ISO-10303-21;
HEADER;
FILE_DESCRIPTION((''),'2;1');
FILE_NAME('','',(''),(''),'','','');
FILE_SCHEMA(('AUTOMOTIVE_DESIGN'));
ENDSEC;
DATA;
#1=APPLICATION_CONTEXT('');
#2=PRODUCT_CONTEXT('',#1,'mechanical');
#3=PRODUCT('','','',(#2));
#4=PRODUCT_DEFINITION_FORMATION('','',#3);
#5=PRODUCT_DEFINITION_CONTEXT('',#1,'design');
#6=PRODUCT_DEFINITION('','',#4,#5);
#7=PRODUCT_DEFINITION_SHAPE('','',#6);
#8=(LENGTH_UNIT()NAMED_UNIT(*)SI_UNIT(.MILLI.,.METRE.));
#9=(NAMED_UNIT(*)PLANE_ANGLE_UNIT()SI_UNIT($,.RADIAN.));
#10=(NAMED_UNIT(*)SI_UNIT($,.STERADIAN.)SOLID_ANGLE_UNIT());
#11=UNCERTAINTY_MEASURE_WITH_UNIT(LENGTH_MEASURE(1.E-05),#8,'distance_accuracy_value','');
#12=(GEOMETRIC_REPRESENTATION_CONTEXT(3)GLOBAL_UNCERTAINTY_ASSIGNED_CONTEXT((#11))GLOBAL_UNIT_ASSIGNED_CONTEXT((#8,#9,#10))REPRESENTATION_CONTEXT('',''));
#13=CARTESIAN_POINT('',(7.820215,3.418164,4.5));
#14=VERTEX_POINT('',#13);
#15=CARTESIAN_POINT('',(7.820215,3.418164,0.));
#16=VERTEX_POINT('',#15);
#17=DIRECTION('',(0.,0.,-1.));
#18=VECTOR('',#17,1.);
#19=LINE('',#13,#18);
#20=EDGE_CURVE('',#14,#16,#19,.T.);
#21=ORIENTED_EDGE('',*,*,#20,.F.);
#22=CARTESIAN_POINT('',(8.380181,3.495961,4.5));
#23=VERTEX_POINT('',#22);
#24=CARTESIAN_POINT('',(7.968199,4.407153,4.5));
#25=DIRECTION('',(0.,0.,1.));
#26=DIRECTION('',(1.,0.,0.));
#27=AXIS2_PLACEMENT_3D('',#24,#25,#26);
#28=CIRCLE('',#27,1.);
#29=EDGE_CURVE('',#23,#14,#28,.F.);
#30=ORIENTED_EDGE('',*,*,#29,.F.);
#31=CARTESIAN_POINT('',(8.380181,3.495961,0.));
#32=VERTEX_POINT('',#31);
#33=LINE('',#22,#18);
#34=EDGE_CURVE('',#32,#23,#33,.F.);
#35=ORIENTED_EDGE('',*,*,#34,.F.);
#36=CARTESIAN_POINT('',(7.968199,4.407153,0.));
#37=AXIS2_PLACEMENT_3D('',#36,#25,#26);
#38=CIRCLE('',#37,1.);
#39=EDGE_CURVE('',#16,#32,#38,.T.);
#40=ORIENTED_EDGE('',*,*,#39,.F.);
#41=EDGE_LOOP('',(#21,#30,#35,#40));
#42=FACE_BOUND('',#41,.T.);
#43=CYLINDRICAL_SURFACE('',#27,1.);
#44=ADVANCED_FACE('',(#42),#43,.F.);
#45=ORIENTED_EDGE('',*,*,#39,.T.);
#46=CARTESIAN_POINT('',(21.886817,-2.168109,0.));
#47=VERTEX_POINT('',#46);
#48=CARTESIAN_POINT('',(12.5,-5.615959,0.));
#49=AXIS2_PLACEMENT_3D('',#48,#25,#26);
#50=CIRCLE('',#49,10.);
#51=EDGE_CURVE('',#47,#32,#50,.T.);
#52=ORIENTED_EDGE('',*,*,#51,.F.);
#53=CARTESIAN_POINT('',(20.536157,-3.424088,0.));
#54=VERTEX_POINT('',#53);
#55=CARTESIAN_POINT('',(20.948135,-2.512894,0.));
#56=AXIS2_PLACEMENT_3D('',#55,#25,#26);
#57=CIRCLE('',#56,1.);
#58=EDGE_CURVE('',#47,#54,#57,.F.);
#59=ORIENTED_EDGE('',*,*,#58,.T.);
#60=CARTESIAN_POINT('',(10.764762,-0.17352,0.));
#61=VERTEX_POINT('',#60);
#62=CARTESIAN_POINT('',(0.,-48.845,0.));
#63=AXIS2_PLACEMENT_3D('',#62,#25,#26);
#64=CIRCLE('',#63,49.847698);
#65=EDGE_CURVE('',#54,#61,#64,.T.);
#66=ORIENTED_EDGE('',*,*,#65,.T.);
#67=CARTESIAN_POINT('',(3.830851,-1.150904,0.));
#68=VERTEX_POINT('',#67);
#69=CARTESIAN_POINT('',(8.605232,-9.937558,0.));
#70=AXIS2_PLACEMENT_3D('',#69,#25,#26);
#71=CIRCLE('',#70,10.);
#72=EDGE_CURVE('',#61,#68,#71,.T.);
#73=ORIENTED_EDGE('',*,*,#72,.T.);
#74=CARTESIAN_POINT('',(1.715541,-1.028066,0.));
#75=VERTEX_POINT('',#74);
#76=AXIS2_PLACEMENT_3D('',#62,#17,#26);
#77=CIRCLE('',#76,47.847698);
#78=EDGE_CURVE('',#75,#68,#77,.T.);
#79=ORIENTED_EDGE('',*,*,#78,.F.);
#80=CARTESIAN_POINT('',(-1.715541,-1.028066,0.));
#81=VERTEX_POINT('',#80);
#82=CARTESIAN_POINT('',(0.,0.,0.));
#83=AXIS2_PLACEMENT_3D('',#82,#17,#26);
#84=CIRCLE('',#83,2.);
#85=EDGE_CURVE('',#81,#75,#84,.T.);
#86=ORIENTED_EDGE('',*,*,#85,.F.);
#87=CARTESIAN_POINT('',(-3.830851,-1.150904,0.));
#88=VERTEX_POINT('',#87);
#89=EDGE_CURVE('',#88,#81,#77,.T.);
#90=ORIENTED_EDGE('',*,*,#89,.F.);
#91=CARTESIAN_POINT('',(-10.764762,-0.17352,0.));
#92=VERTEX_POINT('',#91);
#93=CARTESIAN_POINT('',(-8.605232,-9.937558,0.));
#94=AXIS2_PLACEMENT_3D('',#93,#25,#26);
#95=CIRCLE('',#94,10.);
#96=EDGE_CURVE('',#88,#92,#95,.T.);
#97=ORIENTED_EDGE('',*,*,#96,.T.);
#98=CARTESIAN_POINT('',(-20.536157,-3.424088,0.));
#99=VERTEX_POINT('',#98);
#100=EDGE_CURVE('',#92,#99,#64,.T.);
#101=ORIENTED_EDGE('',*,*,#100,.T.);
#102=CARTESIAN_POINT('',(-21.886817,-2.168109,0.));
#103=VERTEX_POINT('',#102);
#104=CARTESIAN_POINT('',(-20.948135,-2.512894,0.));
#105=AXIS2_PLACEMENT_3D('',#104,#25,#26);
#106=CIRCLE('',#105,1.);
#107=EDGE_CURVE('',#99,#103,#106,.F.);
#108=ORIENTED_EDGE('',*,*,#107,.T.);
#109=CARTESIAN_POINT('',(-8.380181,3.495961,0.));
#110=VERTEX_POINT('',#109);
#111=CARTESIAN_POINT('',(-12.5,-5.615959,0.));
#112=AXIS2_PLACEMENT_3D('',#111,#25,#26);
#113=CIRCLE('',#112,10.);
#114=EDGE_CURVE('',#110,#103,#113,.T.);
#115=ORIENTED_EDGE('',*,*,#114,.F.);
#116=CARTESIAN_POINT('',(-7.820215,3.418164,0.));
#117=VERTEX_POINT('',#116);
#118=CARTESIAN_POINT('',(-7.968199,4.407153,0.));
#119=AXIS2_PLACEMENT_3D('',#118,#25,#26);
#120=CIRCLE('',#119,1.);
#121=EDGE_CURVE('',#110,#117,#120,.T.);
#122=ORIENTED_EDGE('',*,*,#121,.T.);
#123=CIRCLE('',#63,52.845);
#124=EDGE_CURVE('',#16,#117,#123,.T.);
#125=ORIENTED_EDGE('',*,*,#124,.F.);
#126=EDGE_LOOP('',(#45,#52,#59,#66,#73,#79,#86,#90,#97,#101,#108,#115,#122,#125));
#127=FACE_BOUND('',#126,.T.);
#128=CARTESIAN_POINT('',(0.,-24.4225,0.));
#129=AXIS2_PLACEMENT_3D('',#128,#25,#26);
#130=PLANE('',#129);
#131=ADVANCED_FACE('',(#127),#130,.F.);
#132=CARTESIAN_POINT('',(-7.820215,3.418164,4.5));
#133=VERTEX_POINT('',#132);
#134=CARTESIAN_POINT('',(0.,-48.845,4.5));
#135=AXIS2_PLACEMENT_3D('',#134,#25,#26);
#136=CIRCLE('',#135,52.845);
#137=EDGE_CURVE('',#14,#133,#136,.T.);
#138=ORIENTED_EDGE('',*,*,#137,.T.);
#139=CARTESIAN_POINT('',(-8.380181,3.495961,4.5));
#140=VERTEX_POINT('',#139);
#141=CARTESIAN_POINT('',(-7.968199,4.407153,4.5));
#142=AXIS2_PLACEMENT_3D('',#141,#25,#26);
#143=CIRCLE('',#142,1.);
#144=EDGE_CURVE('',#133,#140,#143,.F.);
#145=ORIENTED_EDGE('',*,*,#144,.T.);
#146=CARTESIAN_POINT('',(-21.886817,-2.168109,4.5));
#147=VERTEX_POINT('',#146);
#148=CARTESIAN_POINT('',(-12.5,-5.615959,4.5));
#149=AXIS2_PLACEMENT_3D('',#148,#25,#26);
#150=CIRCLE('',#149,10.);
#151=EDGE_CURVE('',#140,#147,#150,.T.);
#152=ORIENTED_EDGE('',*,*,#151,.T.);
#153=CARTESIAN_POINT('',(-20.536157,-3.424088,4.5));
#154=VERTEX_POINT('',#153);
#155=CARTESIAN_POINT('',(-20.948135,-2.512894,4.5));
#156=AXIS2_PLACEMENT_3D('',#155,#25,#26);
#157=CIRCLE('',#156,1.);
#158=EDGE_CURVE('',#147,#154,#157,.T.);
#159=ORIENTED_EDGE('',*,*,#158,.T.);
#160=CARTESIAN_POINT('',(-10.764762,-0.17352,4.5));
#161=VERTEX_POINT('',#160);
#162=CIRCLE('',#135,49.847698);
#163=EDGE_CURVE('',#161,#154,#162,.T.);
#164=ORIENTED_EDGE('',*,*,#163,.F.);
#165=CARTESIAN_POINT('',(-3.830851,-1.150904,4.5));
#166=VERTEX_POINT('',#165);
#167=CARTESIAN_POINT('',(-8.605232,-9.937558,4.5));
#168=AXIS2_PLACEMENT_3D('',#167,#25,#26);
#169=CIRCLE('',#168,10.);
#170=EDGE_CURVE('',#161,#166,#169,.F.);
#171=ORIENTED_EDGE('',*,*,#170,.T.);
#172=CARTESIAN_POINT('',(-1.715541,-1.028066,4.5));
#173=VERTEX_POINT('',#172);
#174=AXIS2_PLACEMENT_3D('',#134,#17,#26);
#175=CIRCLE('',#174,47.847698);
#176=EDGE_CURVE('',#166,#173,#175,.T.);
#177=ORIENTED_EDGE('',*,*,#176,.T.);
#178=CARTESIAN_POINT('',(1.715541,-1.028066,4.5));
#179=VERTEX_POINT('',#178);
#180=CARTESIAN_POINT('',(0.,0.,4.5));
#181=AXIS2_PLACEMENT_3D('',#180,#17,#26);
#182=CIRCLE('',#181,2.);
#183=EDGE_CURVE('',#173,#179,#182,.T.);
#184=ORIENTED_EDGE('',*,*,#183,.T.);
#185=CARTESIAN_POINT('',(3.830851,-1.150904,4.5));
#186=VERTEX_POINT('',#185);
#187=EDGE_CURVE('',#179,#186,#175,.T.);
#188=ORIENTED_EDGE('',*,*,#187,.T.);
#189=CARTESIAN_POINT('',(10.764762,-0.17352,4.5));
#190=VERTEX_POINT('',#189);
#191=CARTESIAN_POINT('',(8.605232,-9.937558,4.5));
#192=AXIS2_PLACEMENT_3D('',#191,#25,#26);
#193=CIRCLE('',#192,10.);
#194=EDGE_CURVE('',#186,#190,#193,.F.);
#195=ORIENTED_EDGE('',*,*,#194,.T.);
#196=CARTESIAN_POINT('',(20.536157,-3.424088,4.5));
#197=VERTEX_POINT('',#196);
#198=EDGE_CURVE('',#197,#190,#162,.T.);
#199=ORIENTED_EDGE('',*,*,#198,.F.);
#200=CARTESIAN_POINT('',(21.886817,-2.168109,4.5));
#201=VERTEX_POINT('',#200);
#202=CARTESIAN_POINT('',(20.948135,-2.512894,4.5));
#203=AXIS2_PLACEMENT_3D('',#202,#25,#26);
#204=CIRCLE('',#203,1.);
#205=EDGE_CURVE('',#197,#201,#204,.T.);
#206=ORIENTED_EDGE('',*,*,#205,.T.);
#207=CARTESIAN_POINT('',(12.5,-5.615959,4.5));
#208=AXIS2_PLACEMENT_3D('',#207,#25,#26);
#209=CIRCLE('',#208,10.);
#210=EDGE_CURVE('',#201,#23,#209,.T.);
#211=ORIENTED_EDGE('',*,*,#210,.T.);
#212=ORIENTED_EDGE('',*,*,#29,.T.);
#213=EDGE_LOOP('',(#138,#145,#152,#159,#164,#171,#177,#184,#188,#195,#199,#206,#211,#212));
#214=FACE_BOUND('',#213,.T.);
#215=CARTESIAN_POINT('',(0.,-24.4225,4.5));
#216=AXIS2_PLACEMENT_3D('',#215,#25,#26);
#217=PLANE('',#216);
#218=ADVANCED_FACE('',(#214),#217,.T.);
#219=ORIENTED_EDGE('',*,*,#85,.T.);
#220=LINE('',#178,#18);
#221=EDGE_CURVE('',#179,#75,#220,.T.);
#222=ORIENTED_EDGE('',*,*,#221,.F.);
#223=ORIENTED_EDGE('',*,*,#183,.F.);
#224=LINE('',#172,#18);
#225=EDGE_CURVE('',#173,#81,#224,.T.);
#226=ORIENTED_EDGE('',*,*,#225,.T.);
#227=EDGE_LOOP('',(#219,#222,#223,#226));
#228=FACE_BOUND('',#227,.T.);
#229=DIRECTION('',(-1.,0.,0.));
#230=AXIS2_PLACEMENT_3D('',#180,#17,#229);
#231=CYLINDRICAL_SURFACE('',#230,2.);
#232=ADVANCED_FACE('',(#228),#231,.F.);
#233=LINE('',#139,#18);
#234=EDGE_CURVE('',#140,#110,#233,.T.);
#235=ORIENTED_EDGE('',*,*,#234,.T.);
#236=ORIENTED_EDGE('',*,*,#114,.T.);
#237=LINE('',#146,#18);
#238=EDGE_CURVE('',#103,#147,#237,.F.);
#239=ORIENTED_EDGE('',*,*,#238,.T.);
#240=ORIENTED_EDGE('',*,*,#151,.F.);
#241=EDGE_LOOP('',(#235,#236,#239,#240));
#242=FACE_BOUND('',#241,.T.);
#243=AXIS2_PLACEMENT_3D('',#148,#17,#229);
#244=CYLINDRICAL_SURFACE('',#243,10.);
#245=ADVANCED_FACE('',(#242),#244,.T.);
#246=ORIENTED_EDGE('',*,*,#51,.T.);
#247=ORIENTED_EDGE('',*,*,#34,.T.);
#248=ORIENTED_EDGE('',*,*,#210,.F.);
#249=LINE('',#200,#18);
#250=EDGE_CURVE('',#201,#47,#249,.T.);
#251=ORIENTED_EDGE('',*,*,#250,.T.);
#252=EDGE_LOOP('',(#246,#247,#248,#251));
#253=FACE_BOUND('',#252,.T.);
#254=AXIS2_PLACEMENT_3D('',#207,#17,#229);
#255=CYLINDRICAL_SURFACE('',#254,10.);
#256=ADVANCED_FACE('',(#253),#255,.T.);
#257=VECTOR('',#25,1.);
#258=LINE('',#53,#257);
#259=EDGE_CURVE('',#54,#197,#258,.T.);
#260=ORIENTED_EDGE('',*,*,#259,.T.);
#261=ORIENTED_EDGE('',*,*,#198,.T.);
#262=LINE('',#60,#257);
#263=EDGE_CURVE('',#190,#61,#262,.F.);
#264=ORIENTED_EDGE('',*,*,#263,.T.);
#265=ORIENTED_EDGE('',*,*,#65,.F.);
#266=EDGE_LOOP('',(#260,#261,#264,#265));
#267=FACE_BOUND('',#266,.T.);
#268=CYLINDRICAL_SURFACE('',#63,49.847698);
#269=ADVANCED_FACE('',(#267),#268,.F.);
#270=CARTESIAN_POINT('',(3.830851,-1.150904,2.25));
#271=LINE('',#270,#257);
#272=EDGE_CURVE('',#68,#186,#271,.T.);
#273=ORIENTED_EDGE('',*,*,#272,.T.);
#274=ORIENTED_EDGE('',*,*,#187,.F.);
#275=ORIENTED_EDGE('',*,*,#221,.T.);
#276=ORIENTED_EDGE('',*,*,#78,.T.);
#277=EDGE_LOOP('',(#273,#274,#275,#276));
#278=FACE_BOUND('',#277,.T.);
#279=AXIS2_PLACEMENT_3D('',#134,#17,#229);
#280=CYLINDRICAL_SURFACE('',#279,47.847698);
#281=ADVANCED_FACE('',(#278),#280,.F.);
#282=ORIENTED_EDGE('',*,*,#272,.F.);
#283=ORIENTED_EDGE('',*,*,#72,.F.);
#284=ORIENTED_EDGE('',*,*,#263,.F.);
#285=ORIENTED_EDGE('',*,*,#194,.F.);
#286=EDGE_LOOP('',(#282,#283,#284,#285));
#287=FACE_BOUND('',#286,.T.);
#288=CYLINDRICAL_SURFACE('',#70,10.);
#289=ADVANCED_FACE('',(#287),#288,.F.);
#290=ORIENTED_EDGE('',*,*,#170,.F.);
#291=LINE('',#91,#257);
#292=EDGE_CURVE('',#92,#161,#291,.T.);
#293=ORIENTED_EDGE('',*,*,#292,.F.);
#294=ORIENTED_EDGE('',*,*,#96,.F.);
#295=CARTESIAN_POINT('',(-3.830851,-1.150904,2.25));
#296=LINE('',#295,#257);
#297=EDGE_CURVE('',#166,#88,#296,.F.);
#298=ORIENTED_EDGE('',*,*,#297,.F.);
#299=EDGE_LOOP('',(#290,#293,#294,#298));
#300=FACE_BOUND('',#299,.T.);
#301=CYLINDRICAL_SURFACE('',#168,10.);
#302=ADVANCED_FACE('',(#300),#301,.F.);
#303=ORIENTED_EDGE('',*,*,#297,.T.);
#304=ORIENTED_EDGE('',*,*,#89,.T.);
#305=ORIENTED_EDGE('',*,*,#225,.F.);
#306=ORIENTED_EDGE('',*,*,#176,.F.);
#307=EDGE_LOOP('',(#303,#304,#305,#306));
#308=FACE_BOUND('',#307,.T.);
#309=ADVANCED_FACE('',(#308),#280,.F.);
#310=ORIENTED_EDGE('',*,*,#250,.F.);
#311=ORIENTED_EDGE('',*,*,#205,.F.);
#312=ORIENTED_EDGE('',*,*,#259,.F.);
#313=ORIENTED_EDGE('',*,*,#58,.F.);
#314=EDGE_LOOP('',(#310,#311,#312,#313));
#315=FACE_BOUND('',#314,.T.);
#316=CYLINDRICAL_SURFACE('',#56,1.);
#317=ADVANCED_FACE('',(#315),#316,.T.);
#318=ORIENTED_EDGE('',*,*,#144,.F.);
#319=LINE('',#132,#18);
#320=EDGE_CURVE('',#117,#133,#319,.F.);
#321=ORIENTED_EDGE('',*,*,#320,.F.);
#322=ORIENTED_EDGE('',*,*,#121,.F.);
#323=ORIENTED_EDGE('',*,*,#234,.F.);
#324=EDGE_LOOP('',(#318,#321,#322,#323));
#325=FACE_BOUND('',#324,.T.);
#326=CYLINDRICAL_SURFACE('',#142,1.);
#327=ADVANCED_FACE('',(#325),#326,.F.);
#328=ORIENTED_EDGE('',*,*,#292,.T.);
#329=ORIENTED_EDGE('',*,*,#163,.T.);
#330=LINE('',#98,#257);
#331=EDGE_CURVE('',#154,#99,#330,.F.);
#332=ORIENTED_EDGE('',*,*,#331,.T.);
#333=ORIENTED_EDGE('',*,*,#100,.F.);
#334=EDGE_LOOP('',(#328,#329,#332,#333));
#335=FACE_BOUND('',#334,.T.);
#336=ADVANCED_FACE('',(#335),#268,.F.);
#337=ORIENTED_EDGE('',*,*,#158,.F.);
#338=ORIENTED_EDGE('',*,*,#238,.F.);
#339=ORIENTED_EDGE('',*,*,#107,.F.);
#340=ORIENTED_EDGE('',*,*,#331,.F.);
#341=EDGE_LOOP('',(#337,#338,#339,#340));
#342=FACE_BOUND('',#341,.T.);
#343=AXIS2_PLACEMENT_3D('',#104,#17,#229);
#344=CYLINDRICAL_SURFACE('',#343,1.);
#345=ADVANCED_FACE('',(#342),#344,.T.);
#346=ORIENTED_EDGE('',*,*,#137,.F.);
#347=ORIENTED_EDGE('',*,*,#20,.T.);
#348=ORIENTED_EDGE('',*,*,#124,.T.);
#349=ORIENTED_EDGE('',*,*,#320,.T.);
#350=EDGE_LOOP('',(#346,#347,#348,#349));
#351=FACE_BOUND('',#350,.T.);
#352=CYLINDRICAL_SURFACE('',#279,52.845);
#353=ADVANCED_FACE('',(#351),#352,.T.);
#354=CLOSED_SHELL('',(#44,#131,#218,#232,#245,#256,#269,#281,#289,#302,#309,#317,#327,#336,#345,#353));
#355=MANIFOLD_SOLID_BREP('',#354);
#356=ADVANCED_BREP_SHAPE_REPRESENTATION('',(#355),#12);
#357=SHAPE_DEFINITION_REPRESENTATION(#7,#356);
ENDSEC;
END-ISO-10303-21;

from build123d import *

# Parameters (mm, degrees)
BOSS_EXTRUDE1_DEPTH = 4.5
CUT_EXTRUDE1_DEPTH  = 24.873773295
FILLET1_R           = 10
FILLET2_R           = 1


with BuildPart() as part:
    # Sketch1 → Boss-Extrude1 (new body)
    with BuildSketch(Plane.XY):
        with BuildLine():
            ThreePointArc((1.715540677, -1.028066236), (0, 2), (-1.715540677, -1.028066236))
            ThreePointArc((-1.715540677, -1.028066236), (-12.4000088, -2.631992998), (-22.452233946, -6.592196245))
            ThreePointArc((-22.452233946, -6.592196245), (-18.208029962, 2.594911639), (-8.117877526, 3.372756458))
            ThreePointArc((-8.117877526, 3.372756458), (0, 4), (8.117877526, 3.372756458))
            ThreePointArc((8.117877526, 3.372756458), (18.208029962, 2.594911639), (22.452233946, -6.592196245))
            ThreePointArc((22.452233946, -6.592196245), (12.4000088, -2.631992998), (1.715540677, -1.028066236))
        make_face()
    extrude(amount=BOSS_EXTRUDE1_DEPTH)

    # Sketch2 → Cut-Extrude1 (cut, through all)
    with BuildSketch(Plane.XY.offset(4.5)):
        with BuildLine():
            ThreePointArc((-3.908816698, 0.849206701), (0, -98.692698318), (3.908816698, 0.849206701))
            ThreePointArc((3.908816698, 0.849206701), (0, -4), (-3.908816698, 0.849206701))
        make_face()
    extrude(amount=-CUT_EXTRUDE1_DEPTH, mode=Mode.SUBTRACT)

    # Fillet1
    # the kernel refuses this fillet: 10 mm, written as the material it adds along each edge
    with BuildSketch(Plane(origin=(3.908816698, 0.849206701, 4.5), x_dir=(0.9890559129703541, -0.14754118414320608, 0), z_dir=(0, 0, -1))) as fillet1_piece_1:
        with BuildLine():
            CenterArc((6.236508998, 9.975798703), FILLET1_R, 232.997328349, 40.989656439)
            Line((0.217986376, 1.989724232), (0.097615924, 1.830002743))
            ThreePointArc((0.097615924, 1.830002743), (0.036653136, 1.002787408), (-0.187037265, 0.070831218))
            Line((-0.187037265, 0.070831218), (-0.013905973, -0.199515974))
            ThreePointArc((-0.013905973, -0.199515974), (3.465903834, -0.320637896), (6.945713641, -0.199515974))
            Line((6.945713641, -0.199515974), (6.931807668, 0))
        make_face()
    extrude(amount=4.5)
    with BuildSketch(Plane(origin=(-3.908816698, 0.849206701, 4.5), x_dir=(-0.9890559129703533, -0.14754118414321077, 0), z_dir=(0, 0, -1))) as fillet1_piece_2:
        with BuildLine():
            CenterArc((6.236508998, -9.975798703), FILLET1_R, 86.013015212, 40.989656439)
            Line((0.217986376, -1.989724232), (0.097615924, -1.830002743))
            ThreePointArc((0.097615924, -1.830002743), (0.036653136, -1.002787408), (-0.187037265, -0.070831218))
            Line((-0.187037265, -0.070831218), (-0.013905973, 0.199515974))
            ThreePointArc((-0.013905973, 0.199515974), (3.465903834, 0.320637896), (6.945713641, 0.199515974))
            Line((6.945713641, 0.199515974), (6.931807668, 0))
        make_face()
    extrude(amount=4.5)

    # Fillet2
    fillet2_edges = [part.edges().sort_by_distance(p)[0] for p in [
        (-8.117877526, 3.372756458, 2.25),
        (8.117877526, 3.372756458, 2.25),
        (22.415896296, -4.321740675, 2.25),
        (-22.415896296, -4.321740675, 2.25),
    ]]
    fillet(fillet2_edges, radius=FILLET2_R)


solid = part.part
